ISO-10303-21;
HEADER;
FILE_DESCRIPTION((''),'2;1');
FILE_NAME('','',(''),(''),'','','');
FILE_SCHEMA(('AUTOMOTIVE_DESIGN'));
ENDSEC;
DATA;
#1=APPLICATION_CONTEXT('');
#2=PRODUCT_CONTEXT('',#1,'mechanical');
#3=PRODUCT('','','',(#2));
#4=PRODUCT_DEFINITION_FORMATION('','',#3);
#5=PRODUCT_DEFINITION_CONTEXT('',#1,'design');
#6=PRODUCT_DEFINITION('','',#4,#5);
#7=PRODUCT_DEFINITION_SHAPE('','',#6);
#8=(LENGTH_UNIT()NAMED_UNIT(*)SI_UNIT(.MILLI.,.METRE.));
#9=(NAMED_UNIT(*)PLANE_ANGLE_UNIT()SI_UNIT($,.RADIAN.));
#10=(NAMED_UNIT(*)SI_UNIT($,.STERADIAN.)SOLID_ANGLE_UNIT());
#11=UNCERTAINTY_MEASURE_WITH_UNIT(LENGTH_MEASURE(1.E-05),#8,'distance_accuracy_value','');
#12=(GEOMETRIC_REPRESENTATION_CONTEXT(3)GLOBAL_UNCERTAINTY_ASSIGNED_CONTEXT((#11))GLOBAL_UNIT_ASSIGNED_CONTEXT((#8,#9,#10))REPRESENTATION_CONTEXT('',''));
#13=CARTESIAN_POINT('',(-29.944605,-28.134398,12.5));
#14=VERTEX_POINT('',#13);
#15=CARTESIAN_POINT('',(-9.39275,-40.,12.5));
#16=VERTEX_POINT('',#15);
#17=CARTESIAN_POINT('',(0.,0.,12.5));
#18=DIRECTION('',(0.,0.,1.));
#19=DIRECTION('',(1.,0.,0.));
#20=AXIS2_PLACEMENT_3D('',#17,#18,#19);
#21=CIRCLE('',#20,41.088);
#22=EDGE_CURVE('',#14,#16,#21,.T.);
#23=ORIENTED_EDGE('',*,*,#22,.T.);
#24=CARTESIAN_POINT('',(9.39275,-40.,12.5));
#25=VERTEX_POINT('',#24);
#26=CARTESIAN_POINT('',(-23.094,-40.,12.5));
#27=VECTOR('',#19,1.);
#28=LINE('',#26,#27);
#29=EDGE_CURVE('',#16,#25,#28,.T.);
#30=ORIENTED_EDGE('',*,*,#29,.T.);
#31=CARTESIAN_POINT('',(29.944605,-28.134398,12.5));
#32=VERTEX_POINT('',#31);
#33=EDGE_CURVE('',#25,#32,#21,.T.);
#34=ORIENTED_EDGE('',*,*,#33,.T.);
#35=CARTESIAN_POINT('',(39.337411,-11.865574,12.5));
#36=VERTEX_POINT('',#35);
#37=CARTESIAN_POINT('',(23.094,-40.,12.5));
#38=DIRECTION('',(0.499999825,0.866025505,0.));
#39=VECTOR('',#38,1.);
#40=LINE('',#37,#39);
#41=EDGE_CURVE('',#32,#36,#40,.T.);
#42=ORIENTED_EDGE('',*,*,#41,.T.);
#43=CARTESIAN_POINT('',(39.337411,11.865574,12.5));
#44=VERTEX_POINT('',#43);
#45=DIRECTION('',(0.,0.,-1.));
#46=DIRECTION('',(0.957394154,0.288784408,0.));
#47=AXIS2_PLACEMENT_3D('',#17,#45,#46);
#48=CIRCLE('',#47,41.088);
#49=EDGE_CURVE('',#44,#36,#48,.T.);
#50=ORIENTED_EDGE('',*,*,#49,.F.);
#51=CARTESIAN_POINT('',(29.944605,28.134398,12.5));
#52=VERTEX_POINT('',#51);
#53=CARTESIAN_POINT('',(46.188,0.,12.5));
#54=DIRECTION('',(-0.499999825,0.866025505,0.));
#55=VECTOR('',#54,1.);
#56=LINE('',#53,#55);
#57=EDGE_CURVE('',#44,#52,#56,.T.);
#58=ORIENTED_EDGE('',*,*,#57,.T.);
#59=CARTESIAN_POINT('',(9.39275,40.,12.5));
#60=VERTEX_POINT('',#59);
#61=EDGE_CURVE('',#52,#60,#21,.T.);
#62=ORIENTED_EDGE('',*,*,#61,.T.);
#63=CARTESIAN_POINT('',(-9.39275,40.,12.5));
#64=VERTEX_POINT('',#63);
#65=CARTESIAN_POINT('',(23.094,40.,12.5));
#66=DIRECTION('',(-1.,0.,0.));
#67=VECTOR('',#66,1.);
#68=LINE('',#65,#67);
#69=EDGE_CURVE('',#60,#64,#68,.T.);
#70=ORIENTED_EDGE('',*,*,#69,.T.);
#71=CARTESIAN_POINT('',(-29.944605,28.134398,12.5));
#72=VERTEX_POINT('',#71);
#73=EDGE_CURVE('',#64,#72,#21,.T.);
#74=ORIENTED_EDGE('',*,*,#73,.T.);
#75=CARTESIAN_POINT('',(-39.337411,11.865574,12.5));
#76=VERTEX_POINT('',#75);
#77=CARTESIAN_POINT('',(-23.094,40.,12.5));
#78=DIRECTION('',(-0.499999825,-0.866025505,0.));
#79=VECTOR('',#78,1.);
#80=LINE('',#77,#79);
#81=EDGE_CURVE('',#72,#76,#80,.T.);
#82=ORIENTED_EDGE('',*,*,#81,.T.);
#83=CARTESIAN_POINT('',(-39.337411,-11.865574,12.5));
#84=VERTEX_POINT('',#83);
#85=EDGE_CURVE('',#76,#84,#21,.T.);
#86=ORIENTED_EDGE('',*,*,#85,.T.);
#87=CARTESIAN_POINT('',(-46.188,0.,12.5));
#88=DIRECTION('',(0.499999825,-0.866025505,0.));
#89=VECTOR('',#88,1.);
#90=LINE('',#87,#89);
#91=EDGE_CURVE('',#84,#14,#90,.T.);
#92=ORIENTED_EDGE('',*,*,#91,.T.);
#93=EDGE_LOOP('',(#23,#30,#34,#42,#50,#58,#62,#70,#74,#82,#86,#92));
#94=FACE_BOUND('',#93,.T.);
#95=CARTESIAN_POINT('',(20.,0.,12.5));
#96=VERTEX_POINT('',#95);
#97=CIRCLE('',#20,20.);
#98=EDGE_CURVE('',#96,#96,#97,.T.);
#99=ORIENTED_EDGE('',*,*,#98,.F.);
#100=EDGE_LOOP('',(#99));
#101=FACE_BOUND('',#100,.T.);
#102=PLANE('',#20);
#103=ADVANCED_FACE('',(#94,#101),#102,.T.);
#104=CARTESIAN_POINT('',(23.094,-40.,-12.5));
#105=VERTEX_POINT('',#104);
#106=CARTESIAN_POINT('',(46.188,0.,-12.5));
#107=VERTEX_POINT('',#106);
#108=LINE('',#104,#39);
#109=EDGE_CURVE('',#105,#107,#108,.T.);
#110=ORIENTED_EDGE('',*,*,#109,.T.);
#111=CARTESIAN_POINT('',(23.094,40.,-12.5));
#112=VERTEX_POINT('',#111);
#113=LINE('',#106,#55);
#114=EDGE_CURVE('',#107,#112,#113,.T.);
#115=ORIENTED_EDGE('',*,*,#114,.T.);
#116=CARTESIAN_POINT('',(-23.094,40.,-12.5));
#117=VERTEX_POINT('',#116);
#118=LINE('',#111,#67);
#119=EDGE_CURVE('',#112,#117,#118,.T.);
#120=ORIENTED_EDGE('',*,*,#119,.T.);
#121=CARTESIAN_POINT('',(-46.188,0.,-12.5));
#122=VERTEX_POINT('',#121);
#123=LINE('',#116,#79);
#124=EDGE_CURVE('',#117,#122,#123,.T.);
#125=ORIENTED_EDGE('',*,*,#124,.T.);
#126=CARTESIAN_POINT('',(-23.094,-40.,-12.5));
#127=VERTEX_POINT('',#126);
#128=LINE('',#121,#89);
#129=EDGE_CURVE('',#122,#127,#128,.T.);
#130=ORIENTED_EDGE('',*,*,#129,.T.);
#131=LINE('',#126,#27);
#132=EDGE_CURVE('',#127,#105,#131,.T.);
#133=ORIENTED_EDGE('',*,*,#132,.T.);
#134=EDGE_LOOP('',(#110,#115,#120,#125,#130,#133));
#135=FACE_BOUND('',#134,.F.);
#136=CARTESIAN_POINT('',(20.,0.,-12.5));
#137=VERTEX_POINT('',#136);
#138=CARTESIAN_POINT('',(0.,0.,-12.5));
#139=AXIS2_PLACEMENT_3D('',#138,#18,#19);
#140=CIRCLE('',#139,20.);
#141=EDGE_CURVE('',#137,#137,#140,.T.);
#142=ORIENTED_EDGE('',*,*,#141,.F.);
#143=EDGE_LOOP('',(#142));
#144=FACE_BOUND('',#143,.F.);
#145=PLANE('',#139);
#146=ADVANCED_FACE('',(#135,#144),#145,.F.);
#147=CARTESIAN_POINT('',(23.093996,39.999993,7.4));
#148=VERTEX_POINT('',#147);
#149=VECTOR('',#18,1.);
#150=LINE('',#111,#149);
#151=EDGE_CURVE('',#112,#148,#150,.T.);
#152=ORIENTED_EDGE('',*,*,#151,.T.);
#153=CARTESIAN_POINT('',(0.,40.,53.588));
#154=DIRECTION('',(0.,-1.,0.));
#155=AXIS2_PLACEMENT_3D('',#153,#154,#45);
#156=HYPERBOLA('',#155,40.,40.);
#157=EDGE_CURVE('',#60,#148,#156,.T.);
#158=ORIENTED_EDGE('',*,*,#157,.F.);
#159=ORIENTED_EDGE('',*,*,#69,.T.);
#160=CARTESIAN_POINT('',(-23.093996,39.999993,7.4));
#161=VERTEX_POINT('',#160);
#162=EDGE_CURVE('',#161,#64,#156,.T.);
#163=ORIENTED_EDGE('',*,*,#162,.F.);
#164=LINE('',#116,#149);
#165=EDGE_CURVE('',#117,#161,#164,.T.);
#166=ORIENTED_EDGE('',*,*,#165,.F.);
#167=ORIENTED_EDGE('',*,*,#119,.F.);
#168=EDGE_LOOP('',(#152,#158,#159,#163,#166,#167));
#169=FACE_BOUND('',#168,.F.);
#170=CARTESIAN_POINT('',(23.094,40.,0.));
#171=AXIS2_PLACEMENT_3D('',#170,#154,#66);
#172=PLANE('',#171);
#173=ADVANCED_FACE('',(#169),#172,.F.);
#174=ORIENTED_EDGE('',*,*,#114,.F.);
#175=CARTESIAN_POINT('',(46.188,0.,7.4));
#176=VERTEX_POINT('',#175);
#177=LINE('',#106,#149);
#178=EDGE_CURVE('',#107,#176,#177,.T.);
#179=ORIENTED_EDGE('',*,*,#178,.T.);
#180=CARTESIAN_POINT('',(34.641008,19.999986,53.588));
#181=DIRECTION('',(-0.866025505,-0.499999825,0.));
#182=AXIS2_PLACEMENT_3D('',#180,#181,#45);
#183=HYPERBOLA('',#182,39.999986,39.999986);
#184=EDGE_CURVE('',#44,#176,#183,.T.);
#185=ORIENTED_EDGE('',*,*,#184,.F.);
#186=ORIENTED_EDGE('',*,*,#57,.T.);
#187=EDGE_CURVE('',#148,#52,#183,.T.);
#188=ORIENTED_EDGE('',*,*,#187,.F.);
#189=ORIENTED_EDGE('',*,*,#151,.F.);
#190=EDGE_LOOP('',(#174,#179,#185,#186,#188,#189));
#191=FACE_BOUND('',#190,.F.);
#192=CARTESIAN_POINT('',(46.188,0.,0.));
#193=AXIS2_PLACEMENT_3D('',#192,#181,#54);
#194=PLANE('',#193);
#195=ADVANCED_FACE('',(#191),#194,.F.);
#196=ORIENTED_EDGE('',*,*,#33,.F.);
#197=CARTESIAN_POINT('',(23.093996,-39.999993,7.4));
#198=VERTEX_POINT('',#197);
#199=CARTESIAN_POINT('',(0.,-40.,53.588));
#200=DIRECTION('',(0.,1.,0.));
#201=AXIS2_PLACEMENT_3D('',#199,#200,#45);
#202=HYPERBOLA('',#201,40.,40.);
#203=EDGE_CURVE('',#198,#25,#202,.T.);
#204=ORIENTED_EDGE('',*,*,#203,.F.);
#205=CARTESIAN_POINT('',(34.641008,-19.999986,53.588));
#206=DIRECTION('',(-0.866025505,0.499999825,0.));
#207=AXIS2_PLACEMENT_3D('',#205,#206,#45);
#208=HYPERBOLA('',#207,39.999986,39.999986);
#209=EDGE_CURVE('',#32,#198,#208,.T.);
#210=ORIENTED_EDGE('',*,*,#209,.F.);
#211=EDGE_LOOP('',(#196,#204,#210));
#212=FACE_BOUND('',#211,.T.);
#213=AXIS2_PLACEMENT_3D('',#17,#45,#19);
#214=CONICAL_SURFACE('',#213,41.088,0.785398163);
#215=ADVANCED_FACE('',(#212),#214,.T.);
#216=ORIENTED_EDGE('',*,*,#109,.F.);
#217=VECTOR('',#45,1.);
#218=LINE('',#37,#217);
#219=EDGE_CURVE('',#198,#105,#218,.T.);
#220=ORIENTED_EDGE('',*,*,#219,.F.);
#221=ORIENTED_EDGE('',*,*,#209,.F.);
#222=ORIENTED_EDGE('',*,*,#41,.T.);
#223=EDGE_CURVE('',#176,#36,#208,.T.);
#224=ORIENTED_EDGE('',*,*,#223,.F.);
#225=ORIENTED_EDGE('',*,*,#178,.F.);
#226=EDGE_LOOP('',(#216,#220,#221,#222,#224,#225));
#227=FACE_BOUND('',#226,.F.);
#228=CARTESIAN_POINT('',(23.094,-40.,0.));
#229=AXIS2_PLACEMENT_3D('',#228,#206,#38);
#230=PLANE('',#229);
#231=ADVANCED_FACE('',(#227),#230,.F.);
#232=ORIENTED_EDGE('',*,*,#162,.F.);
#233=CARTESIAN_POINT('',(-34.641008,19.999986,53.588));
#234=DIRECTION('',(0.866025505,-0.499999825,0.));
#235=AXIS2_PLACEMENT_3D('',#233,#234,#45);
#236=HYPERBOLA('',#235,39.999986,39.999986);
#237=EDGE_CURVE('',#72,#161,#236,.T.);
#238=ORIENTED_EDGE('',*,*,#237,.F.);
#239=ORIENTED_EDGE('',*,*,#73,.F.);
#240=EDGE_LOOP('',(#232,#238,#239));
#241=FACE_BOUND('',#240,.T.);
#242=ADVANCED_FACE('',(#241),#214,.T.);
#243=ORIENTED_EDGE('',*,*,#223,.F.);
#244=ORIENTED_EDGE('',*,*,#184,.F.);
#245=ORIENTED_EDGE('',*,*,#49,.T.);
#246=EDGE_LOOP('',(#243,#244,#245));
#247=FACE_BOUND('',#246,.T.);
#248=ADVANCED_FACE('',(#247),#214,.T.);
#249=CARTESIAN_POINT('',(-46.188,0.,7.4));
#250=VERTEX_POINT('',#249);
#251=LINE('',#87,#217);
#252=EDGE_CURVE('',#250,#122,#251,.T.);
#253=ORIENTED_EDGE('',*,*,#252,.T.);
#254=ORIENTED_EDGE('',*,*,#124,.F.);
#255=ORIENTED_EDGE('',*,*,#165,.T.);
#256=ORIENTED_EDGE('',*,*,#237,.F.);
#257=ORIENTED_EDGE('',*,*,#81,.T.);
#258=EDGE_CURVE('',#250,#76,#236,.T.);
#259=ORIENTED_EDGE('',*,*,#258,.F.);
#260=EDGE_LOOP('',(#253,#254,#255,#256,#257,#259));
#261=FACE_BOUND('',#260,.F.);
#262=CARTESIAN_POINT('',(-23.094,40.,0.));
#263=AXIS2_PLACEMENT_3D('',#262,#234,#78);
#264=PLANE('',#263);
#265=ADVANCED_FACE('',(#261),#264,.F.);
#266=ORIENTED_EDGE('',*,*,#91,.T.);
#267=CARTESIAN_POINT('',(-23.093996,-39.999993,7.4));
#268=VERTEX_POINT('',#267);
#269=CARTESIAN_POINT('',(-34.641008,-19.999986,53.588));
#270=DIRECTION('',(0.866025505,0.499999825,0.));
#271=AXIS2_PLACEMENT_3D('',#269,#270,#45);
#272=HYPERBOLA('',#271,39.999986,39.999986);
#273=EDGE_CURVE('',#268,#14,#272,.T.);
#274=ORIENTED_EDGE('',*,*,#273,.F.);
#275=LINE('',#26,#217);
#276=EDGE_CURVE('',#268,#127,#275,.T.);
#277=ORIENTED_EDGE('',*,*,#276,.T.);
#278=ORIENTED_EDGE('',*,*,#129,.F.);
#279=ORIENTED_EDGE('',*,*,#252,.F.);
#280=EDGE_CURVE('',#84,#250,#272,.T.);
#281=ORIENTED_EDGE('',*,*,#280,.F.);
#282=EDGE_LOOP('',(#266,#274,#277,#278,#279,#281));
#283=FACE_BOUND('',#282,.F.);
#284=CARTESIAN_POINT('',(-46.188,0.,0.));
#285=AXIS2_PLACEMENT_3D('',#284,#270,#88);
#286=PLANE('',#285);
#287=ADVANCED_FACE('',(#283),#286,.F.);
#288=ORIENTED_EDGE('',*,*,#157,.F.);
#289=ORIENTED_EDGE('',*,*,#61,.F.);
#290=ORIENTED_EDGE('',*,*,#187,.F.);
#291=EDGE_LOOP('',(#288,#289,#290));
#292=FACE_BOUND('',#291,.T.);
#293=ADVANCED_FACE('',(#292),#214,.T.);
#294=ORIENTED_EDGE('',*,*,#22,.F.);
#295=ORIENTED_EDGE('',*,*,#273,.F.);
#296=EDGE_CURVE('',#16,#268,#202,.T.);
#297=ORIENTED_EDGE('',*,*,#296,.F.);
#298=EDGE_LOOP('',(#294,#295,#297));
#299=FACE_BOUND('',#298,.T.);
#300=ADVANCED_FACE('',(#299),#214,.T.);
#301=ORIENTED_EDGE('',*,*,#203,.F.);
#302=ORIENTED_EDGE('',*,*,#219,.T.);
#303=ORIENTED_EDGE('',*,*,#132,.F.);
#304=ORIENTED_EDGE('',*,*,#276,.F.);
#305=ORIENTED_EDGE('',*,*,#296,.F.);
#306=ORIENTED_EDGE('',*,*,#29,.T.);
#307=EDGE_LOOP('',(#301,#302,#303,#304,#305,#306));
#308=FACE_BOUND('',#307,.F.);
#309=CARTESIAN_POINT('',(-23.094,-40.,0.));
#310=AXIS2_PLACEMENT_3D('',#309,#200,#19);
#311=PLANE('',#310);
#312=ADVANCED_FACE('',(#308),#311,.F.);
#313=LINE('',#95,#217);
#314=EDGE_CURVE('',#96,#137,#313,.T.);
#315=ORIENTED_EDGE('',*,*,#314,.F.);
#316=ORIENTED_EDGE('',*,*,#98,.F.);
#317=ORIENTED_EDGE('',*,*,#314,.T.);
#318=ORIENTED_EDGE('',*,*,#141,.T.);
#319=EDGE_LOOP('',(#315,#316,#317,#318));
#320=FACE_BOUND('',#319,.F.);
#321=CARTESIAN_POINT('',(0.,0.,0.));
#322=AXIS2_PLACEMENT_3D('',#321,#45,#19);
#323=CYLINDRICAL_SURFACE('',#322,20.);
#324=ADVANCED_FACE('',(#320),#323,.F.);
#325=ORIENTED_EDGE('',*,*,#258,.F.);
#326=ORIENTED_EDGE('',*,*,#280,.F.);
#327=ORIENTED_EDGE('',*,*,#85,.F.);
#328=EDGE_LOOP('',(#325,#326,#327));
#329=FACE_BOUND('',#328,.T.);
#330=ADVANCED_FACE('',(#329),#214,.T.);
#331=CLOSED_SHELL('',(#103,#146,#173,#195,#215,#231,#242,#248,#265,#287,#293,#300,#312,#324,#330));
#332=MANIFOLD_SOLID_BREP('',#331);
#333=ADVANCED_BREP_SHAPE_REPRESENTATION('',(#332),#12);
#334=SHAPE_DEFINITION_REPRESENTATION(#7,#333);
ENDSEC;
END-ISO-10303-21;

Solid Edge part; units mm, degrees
sketch "Sketch1" plane through (0, 0, 0) normal (0, 0, 1) x (1, 0, 0)
  line L0 (23.094, -40) -> (46.188, 0)
  line L1 (46.188, 0) -> (23.094, 40)
  line L2 (23.094, 40) -> (-23.094, 40)
  line L3 (-23.094, 40) -> (-46.188, 0)
  line L4 (-46.188, 0) -> (-23.094, -40)
  line L5 (-23.094, -40) -> (23.094, -40)
  circle A0 centre (0, 0) radius 20
extrude "Protrusion1" add sketch "Sketch1" along normal mid plane 25
sketch "Sketch2" plane through (0, 0, 0) normal (0, -1, 0) x (1, 0, 0)
  line L0 (41.088, 12.5) -> (46.188, 7.4)
  line L1 (46.188, 12.5) -> (46.188, 7.4)
  line L2 (46.188, 12.5) -> (41.088, 12.5)
revolve "RevolvedCutout1" cut sketch "Sketch2" angle 360 about axis through (0, 0, -26.9606) along (0, 0, 1)
